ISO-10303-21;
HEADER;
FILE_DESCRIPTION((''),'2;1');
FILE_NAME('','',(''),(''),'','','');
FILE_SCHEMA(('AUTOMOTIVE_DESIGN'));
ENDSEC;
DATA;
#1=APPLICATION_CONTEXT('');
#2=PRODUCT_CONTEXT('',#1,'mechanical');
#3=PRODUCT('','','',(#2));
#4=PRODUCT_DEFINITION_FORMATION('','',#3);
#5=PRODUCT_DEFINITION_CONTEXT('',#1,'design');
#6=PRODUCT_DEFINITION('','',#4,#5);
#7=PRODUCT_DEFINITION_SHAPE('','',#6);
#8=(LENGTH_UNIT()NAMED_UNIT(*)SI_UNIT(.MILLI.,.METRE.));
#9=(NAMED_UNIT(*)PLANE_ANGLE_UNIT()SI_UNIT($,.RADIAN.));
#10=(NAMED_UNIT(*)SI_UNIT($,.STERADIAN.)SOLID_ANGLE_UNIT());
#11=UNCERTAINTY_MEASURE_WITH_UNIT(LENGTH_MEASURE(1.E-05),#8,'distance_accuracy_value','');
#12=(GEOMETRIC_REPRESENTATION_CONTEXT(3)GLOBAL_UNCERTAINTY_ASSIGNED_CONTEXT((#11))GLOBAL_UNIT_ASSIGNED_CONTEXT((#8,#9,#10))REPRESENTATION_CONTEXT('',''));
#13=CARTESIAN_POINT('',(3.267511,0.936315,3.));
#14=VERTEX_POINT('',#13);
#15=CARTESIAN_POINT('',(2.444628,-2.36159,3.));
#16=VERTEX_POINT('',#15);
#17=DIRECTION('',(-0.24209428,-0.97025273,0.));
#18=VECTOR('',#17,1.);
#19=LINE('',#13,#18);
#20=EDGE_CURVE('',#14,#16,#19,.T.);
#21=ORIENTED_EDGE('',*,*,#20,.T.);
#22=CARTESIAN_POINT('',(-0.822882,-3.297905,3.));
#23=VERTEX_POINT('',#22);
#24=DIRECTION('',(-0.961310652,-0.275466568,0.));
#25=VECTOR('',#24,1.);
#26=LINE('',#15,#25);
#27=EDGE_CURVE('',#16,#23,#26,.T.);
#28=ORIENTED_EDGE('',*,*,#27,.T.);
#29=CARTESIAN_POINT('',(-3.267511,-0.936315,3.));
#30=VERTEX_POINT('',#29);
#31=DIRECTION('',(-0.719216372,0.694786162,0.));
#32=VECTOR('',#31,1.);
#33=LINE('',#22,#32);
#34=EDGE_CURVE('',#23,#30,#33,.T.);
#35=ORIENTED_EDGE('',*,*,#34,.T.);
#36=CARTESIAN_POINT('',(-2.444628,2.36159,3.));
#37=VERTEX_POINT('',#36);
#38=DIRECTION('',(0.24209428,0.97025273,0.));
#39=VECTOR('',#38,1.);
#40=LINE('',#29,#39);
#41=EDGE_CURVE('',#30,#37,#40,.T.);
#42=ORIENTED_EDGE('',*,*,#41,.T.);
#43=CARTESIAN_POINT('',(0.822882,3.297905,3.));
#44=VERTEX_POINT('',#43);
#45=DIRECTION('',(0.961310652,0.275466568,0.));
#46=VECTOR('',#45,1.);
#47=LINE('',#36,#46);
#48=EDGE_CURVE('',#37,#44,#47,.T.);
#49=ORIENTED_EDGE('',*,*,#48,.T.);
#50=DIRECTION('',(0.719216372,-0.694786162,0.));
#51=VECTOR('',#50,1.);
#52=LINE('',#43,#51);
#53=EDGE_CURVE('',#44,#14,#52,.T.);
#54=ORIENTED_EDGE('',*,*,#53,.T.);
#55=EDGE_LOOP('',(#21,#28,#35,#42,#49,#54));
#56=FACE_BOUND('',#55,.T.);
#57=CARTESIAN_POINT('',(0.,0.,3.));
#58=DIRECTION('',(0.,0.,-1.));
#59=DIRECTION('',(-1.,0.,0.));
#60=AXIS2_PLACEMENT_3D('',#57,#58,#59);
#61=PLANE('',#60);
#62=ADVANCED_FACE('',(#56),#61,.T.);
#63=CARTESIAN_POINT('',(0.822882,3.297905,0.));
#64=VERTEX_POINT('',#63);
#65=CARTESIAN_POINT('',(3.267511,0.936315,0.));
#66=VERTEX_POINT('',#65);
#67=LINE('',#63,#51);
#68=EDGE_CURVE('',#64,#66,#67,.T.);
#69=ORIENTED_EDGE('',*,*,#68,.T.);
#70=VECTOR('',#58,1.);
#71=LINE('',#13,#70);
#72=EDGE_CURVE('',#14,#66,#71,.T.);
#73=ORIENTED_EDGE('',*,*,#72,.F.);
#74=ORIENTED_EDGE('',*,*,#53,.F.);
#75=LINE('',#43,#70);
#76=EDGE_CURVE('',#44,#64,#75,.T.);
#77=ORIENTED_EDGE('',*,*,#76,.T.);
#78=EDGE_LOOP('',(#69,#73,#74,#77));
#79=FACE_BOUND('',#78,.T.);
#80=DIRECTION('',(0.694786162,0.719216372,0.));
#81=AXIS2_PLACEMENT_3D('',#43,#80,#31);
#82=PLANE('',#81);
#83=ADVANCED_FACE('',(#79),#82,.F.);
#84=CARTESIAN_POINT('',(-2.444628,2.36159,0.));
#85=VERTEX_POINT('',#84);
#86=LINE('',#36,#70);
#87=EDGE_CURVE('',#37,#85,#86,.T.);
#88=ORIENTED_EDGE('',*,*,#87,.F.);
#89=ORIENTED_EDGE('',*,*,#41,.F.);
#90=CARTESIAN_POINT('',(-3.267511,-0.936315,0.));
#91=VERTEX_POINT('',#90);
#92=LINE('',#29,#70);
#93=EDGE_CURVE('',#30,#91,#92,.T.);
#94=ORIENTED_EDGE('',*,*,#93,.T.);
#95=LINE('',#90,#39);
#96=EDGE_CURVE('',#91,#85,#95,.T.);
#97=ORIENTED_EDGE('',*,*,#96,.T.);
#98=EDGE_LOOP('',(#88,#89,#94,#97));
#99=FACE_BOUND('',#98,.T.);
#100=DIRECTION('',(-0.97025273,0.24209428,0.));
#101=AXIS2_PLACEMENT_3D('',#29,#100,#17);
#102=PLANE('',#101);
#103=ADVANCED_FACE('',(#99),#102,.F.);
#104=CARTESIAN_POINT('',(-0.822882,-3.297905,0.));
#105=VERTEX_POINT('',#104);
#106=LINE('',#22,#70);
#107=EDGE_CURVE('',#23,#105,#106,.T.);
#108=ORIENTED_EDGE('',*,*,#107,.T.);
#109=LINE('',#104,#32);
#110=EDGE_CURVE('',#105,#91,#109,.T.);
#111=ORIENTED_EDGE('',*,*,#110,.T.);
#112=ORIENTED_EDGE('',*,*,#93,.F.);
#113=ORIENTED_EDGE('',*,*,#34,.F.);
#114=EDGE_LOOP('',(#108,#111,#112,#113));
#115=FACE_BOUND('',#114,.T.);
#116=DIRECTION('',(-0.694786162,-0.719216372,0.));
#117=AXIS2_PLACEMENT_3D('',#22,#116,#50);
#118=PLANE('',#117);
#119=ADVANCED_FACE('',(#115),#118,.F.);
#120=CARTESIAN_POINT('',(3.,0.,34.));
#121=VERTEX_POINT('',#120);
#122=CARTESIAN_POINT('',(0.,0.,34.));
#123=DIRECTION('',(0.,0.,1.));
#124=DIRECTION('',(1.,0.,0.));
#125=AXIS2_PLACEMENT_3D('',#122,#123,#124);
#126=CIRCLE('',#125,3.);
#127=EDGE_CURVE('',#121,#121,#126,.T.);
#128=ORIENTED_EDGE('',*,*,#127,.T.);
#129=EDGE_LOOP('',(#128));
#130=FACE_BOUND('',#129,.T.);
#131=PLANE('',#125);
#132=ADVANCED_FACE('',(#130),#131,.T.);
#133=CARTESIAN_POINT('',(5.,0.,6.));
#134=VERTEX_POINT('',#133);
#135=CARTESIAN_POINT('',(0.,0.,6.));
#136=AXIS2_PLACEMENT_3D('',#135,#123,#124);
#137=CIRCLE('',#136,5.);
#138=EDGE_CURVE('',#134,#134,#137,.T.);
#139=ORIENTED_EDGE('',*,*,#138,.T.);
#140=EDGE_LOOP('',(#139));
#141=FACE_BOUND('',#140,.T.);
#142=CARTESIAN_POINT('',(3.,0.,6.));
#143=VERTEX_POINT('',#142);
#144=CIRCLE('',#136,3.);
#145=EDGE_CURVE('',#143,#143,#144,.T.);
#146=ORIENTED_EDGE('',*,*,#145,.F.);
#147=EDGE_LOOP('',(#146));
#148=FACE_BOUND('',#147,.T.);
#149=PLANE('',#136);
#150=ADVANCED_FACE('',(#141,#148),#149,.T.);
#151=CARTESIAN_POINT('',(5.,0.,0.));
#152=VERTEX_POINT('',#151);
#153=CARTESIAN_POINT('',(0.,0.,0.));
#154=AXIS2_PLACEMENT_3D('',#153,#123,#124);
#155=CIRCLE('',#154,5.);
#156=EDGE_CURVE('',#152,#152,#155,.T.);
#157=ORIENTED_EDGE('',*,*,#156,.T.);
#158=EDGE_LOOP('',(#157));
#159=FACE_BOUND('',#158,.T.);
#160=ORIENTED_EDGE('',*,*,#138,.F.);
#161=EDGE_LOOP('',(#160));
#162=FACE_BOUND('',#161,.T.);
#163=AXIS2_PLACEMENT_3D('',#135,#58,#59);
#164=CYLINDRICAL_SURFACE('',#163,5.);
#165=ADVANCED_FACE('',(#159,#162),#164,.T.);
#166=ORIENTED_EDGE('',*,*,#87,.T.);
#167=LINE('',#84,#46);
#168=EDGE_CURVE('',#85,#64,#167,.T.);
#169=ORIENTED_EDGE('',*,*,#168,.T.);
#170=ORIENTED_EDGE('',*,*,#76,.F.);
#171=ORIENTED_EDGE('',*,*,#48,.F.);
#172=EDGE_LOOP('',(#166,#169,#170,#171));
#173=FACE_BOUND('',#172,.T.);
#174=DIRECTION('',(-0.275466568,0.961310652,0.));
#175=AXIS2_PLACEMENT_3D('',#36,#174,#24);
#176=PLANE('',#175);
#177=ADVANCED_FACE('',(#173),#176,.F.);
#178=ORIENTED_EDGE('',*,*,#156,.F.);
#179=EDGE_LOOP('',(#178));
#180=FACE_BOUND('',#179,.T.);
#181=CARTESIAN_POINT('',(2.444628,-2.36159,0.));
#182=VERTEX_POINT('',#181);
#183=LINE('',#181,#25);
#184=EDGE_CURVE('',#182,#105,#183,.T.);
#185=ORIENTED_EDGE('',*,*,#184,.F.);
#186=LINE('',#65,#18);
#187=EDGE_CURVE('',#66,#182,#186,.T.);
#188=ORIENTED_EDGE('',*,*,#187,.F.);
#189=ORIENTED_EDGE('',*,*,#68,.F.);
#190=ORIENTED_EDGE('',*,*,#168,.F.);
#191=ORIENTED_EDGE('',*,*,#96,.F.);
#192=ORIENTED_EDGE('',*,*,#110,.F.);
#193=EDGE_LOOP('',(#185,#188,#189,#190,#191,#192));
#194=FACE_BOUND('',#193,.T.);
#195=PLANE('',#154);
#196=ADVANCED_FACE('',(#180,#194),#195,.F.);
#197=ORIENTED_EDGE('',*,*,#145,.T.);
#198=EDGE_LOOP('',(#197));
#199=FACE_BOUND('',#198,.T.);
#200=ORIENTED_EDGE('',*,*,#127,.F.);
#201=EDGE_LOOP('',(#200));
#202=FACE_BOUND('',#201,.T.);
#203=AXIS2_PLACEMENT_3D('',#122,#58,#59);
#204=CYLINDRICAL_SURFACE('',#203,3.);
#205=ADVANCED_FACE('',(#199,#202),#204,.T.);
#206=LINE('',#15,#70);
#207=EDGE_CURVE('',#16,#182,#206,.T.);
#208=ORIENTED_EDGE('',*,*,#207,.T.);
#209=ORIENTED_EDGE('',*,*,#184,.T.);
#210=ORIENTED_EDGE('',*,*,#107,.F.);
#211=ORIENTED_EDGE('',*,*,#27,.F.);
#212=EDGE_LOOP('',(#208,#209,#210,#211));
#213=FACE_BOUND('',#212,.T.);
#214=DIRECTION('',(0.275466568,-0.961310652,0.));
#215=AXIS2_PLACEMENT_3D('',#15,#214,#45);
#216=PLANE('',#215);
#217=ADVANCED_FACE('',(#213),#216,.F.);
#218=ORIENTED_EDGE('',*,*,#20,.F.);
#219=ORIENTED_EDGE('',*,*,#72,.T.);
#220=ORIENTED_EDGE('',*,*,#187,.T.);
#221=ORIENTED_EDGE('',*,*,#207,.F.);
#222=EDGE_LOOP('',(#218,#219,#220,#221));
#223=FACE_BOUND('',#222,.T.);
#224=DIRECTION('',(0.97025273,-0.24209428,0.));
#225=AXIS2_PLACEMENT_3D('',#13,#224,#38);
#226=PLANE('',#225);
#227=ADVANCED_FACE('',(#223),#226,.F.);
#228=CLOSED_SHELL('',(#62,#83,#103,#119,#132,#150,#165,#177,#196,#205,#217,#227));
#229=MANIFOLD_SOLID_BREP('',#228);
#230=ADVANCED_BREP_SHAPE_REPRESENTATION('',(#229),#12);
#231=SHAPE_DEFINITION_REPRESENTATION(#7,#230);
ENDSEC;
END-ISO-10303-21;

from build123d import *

# Parameters (mm, degrees)
SKETCH_1_R                = 5
EXTRUDE_1_DEPTH           = 6
CUT_EXTRUDE_START         = -3
CUT_EXTRUDE_1_DEPTH       = 3
CUT_EXTRUDE_START_2       = -34
CUT_EXTRUDE_1_2_OUTLINE_R = 3
CUT_EXTRUDE_1_2_DEPTH     = 28


# Read off the part's stored shape, not the designer's step: ｶｯﾄ - 押し出し1
with BuildPart() as part:
    # ｽｹｯﾁ1 → ﾎﾞｽ - 押し出し1 (new body)
    with BuildSketch(Plane.XY):
        Circle(SKETCH_1_R)
    extrude(amount=EXTRUDE_1_DEPTH)

    # ｶｯﾄ - 押し出し1 outline → ｶｯﾄ - 押し出し1 (cut)
    with BuildSketch(Plane(origin=(0, 0, 0), x_dir=(-1, 0, 0), z_dir=(0, 0, -1)).offset(CUT_EXTRUDE_START)):
        Polygon((3.267510606, -0.936315364), (2.444628194, 2.36158951), (-0.822882412, 3.297904873), (-3.267510606, 0.936315364), (-2.444628194, -2.36158951), (0.822882412, -3.297904873), align=None)
    extrude(amount=CUT_EXTRUDE_1_DEPTH, mode=Mode.SUBTRACT)

    # Cut-Extrude 1 2 outline → Cut-Extrude 1 2 (add)
    with BuildSketch(Plane(origin=(0, 0, 0), x_dir=(-1, 0, 0), z_dir=(0, 0, -1)).offset(CUT_EXTRUDE_START_2)):
        Circle(CUT_EXTRUDE_1_2_OUTLINE_R)
    extrude(amount=CUT_EXTRUDE_1_2_DEPTH)


solid = part.part
